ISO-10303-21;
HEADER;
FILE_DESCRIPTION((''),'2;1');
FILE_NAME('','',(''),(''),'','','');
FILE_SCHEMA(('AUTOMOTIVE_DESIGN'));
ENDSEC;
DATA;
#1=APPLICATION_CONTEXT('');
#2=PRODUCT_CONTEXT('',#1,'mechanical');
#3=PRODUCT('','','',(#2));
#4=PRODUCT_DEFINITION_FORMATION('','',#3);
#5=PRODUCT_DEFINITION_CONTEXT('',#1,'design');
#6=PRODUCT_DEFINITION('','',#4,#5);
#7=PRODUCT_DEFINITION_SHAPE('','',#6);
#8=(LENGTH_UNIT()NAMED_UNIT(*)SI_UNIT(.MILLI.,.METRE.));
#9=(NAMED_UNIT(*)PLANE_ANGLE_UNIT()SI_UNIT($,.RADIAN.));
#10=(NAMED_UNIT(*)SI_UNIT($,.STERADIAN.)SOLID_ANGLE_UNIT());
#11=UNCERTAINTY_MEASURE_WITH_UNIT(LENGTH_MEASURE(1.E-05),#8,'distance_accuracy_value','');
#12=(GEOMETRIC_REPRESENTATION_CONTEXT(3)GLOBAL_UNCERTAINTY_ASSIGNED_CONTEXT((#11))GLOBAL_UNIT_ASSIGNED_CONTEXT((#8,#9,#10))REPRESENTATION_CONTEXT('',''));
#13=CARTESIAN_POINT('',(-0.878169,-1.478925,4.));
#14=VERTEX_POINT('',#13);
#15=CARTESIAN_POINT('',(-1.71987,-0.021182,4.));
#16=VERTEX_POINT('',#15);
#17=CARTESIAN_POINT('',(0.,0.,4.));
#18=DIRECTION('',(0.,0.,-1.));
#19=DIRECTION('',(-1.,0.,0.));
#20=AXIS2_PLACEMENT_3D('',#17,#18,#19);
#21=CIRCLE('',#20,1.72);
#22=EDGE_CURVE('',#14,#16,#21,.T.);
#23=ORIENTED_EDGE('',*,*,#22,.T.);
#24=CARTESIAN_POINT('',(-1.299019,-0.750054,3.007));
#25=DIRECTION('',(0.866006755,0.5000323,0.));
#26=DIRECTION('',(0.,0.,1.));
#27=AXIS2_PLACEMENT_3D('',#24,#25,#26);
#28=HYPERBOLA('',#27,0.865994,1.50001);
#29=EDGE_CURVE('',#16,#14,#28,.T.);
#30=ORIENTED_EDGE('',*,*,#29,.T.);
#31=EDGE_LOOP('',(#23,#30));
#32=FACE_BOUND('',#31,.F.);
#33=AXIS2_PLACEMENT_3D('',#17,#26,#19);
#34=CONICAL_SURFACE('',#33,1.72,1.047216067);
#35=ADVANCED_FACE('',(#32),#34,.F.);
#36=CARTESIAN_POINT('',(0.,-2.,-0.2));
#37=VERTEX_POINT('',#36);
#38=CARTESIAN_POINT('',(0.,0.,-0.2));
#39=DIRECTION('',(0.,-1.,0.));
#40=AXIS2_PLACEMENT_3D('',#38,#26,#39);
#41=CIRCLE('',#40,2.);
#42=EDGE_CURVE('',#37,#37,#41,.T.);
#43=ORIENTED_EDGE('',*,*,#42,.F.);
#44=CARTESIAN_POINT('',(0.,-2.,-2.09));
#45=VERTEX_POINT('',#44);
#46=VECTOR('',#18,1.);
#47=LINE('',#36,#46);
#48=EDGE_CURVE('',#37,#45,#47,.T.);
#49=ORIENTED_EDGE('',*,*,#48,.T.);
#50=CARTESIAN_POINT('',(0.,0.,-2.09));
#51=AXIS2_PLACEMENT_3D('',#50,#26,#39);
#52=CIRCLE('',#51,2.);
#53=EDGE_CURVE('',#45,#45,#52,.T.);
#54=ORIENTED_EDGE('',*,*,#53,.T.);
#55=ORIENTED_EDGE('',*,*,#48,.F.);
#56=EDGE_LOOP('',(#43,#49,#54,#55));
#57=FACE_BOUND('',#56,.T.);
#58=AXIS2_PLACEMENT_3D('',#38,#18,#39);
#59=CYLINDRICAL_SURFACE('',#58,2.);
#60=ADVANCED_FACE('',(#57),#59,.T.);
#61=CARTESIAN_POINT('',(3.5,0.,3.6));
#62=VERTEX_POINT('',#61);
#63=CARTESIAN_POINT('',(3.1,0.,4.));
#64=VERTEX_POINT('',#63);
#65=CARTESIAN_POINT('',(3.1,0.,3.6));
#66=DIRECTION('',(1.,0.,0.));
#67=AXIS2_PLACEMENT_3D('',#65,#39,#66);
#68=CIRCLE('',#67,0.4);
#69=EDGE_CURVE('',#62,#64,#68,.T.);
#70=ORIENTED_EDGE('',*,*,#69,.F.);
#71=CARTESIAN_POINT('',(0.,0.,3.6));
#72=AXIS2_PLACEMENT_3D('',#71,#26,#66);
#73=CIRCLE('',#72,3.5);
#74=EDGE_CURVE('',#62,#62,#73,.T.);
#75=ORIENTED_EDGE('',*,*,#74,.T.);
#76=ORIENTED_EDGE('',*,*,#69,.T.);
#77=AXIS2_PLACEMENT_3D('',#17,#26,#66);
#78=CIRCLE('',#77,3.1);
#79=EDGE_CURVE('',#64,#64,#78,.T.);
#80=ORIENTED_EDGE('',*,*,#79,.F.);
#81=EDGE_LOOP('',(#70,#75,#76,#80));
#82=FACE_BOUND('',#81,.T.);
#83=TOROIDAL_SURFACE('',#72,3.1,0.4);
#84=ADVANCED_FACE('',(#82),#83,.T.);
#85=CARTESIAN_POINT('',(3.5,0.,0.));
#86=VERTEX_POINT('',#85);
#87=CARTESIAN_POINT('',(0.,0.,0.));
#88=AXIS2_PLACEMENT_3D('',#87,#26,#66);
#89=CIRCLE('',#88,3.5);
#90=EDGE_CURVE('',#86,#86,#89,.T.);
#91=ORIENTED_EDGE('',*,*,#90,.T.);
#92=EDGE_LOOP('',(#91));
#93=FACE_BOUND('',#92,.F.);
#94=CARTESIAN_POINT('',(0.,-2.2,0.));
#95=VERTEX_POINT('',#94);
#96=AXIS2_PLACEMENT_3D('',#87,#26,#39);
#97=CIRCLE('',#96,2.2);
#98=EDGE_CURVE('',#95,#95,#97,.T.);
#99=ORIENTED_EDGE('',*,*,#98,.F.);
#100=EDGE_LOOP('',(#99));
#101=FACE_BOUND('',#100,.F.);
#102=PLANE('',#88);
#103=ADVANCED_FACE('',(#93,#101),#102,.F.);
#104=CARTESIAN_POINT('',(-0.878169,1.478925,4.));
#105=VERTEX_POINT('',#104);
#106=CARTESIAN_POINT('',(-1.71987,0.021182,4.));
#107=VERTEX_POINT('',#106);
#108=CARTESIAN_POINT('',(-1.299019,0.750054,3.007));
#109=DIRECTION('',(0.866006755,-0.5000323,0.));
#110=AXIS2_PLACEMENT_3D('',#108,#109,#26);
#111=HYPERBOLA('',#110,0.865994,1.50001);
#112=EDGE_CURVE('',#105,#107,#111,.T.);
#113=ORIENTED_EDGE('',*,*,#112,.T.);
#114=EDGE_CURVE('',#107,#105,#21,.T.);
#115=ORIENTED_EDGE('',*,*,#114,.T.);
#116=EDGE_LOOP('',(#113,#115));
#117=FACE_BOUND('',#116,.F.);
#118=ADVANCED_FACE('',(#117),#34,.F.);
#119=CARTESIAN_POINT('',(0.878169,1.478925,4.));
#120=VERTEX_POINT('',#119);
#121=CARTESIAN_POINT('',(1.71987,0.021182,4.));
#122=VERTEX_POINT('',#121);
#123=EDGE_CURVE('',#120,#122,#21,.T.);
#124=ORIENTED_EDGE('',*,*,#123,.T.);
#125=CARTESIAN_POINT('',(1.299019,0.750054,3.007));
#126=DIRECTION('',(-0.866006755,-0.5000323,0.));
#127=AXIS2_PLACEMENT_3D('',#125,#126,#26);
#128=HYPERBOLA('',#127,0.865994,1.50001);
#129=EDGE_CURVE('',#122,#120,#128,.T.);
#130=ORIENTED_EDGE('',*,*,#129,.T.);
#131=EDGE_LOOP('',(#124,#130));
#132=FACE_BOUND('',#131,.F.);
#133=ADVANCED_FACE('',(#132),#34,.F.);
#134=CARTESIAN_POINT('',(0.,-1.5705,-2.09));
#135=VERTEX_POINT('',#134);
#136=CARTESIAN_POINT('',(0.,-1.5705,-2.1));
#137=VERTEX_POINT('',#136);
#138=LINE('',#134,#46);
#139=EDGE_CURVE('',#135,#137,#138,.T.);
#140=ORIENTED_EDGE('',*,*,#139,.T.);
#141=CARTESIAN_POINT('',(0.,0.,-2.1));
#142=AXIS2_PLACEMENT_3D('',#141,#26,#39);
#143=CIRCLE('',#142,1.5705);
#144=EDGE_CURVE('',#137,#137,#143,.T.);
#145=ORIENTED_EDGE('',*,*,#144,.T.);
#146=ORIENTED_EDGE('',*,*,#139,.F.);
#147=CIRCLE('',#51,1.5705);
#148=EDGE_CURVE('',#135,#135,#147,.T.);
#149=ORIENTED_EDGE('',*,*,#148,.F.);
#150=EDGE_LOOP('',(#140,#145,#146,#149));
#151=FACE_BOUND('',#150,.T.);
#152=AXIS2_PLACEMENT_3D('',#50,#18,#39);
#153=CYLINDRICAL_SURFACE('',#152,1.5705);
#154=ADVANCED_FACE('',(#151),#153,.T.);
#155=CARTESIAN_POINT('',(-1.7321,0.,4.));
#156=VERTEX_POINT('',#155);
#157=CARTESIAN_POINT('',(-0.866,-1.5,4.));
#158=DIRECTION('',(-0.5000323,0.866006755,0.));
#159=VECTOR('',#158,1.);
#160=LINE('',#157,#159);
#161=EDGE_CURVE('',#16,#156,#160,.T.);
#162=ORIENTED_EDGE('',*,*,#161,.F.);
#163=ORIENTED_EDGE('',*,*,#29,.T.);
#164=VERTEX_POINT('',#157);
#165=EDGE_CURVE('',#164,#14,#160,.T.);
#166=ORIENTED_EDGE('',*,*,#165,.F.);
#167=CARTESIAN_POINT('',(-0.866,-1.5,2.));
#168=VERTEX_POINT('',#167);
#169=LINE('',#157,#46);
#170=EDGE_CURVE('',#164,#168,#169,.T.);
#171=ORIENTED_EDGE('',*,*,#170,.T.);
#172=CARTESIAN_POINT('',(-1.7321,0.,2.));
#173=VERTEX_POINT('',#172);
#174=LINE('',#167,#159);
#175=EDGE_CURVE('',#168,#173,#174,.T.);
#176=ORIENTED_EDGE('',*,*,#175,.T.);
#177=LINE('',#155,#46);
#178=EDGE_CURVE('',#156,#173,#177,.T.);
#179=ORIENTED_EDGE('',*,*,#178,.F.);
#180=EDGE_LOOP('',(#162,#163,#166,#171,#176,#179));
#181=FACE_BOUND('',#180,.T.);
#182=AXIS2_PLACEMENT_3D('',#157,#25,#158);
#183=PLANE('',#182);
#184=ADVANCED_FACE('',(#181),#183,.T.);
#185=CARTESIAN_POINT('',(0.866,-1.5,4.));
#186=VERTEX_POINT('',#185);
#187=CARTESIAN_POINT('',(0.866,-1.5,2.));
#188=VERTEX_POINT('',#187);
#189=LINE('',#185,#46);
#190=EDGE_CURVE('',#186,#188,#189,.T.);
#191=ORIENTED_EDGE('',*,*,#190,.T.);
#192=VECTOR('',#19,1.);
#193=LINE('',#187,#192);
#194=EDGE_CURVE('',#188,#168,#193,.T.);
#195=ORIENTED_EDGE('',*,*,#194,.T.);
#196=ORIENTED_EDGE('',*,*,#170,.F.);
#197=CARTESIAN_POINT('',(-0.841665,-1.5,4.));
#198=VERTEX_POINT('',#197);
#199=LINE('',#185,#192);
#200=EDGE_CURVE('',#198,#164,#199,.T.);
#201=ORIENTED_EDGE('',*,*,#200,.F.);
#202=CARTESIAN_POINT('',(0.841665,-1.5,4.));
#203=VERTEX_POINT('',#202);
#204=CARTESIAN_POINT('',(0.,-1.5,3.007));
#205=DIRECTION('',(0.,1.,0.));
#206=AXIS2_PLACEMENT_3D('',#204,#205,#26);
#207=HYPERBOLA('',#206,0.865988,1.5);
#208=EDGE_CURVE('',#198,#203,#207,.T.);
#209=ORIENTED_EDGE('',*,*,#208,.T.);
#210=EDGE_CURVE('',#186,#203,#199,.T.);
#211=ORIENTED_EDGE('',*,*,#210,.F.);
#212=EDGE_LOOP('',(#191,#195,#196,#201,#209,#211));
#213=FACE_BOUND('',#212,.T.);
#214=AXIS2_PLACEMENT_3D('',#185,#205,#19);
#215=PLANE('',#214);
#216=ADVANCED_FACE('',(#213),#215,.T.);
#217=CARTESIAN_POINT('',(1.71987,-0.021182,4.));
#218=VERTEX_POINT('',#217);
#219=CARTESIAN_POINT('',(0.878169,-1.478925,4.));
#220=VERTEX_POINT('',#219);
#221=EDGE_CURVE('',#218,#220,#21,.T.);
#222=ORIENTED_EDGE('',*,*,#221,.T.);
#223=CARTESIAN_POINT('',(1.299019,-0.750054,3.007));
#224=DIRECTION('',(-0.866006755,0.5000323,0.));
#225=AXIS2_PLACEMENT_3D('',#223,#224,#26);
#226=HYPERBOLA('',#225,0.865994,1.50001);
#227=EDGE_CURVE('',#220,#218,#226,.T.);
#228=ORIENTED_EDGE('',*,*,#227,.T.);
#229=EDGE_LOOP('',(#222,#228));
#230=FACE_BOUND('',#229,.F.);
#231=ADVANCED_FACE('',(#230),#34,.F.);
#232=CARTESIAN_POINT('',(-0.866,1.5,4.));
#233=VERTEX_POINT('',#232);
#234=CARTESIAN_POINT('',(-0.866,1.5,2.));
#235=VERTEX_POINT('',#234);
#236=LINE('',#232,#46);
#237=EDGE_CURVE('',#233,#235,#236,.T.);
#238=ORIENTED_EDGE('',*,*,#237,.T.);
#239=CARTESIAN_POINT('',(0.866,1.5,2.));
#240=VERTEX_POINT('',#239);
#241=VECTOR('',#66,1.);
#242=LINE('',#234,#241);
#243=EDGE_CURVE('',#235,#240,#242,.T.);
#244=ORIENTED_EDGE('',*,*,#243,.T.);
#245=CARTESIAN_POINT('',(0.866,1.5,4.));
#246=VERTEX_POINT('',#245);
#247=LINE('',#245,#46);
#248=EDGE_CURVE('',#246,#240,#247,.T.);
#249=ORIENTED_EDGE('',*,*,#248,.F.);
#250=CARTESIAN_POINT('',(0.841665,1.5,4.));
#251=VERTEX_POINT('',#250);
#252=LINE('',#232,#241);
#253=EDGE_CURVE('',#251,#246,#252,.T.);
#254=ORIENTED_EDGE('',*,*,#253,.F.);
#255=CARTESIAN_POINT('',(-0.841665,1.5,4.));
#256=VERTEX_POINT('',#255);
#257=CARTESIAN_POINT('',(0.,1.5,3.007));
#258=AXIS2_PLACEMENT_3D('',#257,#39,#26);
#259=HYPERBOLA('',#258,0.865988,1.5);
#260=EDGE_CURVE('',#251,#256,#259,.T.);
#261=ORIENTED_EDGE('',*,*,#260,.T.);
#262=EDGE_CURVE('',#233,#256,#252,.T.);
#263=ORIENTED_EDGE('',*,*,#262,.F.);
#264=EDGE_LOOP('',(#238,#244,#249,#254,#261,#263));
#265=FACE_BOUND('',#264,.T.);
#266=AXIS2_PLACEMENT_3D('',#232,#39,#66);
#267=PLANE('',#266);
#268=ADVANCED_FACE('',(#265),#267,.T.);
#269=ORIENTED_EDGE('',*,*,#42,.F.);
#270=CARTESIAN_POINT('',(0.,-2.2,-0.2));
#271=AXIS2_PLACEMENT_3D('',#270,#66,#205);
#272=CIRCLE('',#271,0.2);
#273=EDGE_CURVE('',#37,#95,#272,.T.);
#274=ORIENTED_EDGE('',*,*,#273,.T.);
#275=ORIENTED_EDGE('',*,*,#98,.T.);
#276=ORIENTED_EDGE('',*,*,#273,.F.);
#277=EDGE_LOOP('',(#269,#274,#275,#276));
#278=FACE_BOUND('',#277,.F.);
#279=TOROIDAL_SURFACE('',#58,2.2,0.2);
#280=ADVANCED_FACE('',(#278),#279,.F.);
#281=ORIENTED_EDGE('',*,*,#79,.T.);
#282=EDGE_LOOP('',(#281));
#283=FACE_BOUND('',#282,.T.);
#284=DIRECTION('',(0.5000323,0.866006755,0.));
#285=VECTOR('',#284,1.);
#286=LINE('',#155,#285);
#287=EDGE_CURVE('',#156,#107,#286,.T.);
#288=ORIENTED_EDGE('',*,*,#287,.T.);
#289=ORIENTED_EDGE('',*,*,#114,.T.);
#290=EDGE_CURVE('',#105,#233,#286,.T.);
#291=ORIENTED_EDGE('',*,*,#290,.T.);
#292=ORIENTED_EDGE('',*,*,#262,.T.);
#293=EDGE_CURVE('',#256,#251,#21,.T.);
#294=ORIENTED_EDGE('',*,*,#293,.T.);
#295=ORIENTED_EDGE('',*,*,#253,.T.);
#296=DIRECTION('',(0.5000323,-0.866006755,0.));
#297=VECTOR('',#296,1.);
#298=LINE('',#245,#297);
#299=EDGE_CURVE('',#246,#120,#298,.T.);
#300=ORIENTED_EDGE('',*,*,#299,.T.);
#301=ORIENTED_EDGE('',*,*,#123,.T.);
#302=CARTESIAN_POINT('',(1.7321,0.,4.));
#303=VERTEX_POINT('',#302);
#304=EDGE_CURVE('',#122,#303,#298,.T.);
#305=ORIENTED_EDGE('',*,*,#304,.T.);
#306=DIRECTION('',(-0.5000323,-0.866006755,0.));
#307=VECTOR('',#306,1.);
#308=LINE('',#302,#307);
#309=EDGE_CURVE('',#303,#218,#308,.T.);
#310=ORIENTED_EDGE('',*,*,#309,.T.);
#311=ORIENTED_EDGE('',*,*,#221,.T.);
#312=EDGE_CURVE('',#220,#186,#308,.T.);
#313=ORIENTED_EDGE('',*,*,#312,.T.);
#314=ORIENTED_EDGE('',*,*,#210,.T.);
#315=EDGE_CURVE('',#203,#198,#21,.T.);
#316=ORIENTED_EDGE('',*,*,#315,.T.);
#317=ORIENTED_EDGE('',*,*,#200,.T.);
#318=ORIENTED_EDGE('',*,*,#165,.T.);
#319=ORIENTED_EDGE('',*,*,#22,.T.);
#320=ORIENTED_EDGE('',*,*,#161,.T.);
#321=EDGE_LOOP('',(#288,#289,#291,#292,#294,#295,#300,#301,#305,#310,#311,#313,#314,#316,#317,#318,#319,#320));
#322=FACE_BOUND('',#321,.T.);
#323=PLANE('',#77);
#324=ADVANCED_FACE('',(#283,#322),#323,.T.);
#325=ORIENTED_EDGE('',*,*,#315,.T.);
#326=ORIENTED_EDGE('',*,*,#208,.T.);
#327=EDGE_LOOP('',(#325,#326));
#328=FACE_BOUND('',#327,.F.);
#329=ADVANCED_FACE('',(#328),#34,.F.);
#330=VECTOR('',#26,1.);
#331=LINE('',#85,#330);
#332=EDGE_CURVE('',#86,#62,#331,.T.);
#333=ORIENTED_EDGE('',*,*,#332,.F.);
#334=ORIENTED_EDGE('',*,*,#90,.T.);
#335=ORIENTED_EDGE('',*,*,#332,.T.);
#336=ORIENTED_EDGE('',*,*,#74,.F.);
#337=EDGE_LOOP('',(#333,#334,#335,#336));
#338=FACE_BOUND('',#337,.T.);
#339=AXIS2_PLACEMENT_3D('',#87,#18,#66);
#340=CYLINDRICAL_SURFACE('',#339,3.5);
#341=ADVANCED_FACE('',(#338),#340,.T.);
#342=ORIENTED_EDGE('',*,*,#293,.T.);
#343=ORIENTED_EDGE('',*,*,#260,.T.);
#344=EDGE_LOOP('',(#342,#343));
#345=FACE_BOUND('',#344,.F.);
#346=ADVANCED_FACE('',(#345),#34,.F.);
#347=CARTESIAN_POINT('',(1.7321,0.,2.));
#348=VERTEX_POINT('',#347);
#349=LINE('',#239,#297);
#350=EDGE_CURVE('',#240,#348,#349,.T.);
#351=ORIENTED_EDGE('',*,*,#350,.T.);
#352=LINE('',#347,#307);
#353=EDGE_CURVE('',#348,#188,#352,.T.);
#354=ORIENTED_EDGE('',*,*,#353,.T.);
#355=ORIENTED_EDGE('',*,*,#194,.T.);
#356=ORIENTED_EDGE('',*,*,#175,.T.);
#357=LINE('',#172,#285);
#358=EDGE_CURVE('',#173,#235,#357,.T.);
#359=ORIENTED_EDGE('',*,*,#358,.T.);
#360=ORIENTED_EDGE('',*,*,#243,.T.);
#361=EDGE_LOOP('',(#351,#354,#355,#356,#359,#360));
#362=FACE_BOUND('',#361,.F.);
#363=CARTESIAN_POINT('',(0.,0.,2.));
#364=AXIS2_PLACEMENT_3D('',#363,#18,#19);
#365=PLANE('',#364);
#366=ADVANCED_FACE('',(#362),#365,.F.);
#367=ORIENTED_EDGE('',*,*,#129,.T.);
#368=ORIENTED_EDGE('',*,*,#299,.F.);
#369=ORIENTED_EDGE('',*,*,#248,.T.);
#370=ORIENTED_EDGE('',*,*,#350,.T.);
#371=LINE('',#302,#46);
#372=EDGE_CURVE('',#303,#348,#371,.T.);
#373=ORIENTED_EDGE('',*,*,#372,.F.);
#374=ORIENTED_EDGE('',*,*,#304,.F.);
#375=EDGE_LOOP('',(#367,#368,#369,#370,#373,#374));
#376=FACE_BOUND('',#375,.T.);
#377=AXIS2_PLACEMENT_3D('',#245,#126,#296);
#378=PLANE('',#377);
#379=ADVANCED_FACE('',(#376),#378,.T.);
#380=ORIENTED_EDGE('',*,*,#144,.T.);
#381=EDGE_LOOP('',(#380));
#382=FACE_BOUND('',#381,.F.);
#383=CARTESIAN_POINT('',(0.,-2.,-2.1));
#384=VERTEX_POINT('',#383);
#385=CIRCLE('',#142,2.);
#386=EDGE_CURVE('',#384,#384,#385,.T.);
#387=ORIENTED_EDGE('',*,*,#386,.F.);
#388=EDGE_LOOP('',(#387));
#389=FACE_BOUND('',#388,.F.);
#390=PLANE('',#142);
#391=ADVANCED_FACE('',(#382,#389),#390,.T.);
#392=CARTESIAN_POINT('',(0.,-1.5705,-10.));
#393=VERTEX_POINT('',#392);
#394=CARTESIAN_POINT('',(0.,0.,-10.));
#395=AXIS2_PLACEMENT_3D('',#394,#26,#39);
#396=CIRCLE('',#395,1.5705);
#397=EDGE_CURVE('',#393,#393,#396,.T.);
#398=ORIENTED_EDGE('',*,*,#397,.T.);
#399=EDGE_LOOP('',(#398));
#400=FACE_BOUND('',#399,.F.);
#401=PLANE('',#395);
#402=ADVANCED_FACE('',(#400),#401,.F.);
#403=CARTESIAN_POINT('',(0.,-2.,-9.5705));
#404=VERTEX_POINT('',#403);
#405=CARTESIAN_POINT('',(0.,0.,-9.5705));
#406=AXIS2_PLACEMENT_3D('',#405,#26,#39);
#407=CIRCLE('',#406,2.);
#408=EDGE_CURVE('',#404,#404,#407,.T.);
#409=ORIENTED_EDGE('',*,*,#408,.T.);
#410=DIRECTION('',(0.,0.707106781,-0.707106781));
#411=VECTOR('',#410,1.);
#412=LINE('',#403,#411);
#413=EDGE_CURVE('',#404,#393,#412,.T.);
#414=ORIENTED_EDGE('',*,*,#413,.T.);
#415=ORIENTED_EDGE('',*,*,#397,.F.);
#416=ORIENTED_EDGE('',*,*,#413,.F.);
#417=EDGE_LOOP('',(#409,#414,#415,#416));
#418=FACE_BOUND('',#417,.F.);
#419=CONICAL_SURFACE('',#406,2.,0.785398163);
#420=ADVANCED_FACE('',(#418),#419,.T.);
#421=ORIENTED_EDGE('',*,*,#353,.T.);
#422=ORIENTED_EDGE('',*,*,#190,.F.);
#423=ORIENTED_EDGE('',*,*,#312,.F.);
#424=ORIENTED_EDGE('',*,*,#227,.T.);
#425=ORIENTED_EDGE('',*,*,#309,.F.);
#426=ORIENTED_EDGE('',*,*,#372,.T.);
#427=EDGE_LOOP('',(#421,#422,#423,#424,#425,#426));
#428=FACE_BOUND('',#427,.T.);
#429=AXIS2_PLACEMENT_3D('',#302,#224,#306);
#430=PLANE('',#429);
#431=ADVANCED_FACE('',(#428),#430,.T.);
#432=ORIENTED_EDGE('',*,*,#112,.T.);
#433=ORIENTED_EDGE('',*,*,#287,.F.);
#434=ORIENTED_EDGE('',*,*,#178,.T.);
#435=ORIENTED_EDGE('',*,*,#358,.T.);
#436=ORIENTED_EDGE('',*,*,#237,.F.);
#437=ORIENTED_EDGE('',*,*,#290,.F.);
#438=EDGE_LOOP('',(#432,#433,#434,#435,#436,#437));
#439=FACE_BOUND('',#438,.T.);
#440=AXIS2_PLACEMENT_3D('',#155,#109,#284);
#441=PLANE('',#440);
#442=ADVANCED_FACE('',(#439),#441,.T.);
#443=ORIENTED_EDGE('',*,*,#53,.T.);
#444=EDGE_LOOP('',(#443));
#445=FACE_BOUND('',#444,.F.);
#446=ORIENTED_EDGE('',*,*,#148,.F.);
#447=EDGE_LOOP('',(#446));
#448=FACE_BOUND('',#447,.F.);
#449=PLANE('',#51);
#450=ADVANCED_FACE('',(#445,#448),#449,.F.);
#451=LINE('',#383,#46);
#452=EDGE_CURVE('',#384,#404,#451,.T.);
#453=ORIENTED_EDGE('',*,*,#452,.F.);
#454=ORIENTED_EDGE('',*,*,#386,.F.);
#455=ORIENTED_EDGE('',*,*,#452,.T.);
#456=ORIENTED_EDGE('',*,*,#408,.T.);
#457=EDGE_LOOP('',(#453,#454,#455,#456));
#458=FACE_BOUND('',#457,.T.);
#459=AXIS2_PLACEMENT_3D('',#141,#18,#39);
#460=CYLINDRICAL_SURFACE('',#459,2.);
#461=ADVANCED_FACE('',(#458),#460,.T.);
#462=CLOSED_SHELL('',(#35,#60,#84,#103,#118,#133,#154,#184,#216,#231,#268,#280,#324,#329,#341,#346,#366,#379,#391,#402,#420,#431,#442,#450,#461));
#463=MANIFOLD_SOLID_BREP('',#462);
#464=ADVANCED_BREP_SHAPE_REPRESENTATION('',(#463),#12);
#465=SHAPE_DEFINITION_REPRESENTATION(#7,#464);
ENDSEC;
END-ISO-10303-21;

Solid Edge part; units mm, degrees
sketch "Sketch1" plane through (0, 0, 0) normal (0, 0, 1) x (1, 0, 0)
  circle A0 centre (0, 0) radius 3.5
extrude "Protrusion1" add sketch "Sketch1" along normal blind 4
sketch "Sketch2" plane through (0, 0, 4) normal (0, 0, 1) x (0, 1, 0)
  line L0 (0, 1.7321) -> (1.5, 0.866)
  line L1 (1.5, 0.866) -> (1.5, -0.866)
  line L2 (1.5, -0.866) -> (0, -1.7321)
  line L3 (0, -1.7321) -> (-1.5, -0.866)
  line L4 (-1.5, -0.866) -> (-1.5, 0.866)
  line L5 (-1.5, 0.866) -> (0, 1.7321)
extrude "Cutout1" cut sketch "Sketch2" against normal blind 2
fillet "Round1" radius 0.4 1 edges at (-3.5, 0, 4)
sketch "Sketch3" plane through (0, 0, 0) normal (1, 0, 0) x (0, 1, 0)
  line L0 (-1.5705, -10) -> (0, -10)
  line L1 (-2, -9.5705) -> (-1.5705, -10)
  line L2 (-2, -2.1) -> (-2, -9.5705)
  line L3 (-1.5705, -2.1) -> (-2, -2.1)
  line L4 (-1.5705, -2.09) -> (-1.5705, -2.1)
  line L5 (-2, -2.09) -> (-1.5705, -2.09)
  line L6 (-2, -0.2) -> (-2, -2.09)
  arc A0 (-2, -0.2) -> (-2.2, 0) centre (-2.2, -0.2) ccw
  dimension "D1" = 2.1
  dimension "D2" = 0.01
  dimension "D3" = 0.2
  dimension "D4" = 10
revolve "RevolvedProtrusion1" add sketch "Sketch3" angle 360 about axis through (0, 0, -60.325) along (0, 0, 1) material side at (0, -0.7853, -9.95)
cosmetic_thread "Thread1" size "M4"
sketch "Sketch4" plane through (0, 0, 0) normal (0, -1, 0) x (1, 0, 0)
  line L0 (-1.72, 4) -> (0, 3.007)
revolve "RevolvedCutout1" cut sketch "Sketch4" angle 360 about axis through (0, 0, 57.15) along (0, 0, -1) material side at (-0.835, 0, 3.5468)
properties material "Stahl"
